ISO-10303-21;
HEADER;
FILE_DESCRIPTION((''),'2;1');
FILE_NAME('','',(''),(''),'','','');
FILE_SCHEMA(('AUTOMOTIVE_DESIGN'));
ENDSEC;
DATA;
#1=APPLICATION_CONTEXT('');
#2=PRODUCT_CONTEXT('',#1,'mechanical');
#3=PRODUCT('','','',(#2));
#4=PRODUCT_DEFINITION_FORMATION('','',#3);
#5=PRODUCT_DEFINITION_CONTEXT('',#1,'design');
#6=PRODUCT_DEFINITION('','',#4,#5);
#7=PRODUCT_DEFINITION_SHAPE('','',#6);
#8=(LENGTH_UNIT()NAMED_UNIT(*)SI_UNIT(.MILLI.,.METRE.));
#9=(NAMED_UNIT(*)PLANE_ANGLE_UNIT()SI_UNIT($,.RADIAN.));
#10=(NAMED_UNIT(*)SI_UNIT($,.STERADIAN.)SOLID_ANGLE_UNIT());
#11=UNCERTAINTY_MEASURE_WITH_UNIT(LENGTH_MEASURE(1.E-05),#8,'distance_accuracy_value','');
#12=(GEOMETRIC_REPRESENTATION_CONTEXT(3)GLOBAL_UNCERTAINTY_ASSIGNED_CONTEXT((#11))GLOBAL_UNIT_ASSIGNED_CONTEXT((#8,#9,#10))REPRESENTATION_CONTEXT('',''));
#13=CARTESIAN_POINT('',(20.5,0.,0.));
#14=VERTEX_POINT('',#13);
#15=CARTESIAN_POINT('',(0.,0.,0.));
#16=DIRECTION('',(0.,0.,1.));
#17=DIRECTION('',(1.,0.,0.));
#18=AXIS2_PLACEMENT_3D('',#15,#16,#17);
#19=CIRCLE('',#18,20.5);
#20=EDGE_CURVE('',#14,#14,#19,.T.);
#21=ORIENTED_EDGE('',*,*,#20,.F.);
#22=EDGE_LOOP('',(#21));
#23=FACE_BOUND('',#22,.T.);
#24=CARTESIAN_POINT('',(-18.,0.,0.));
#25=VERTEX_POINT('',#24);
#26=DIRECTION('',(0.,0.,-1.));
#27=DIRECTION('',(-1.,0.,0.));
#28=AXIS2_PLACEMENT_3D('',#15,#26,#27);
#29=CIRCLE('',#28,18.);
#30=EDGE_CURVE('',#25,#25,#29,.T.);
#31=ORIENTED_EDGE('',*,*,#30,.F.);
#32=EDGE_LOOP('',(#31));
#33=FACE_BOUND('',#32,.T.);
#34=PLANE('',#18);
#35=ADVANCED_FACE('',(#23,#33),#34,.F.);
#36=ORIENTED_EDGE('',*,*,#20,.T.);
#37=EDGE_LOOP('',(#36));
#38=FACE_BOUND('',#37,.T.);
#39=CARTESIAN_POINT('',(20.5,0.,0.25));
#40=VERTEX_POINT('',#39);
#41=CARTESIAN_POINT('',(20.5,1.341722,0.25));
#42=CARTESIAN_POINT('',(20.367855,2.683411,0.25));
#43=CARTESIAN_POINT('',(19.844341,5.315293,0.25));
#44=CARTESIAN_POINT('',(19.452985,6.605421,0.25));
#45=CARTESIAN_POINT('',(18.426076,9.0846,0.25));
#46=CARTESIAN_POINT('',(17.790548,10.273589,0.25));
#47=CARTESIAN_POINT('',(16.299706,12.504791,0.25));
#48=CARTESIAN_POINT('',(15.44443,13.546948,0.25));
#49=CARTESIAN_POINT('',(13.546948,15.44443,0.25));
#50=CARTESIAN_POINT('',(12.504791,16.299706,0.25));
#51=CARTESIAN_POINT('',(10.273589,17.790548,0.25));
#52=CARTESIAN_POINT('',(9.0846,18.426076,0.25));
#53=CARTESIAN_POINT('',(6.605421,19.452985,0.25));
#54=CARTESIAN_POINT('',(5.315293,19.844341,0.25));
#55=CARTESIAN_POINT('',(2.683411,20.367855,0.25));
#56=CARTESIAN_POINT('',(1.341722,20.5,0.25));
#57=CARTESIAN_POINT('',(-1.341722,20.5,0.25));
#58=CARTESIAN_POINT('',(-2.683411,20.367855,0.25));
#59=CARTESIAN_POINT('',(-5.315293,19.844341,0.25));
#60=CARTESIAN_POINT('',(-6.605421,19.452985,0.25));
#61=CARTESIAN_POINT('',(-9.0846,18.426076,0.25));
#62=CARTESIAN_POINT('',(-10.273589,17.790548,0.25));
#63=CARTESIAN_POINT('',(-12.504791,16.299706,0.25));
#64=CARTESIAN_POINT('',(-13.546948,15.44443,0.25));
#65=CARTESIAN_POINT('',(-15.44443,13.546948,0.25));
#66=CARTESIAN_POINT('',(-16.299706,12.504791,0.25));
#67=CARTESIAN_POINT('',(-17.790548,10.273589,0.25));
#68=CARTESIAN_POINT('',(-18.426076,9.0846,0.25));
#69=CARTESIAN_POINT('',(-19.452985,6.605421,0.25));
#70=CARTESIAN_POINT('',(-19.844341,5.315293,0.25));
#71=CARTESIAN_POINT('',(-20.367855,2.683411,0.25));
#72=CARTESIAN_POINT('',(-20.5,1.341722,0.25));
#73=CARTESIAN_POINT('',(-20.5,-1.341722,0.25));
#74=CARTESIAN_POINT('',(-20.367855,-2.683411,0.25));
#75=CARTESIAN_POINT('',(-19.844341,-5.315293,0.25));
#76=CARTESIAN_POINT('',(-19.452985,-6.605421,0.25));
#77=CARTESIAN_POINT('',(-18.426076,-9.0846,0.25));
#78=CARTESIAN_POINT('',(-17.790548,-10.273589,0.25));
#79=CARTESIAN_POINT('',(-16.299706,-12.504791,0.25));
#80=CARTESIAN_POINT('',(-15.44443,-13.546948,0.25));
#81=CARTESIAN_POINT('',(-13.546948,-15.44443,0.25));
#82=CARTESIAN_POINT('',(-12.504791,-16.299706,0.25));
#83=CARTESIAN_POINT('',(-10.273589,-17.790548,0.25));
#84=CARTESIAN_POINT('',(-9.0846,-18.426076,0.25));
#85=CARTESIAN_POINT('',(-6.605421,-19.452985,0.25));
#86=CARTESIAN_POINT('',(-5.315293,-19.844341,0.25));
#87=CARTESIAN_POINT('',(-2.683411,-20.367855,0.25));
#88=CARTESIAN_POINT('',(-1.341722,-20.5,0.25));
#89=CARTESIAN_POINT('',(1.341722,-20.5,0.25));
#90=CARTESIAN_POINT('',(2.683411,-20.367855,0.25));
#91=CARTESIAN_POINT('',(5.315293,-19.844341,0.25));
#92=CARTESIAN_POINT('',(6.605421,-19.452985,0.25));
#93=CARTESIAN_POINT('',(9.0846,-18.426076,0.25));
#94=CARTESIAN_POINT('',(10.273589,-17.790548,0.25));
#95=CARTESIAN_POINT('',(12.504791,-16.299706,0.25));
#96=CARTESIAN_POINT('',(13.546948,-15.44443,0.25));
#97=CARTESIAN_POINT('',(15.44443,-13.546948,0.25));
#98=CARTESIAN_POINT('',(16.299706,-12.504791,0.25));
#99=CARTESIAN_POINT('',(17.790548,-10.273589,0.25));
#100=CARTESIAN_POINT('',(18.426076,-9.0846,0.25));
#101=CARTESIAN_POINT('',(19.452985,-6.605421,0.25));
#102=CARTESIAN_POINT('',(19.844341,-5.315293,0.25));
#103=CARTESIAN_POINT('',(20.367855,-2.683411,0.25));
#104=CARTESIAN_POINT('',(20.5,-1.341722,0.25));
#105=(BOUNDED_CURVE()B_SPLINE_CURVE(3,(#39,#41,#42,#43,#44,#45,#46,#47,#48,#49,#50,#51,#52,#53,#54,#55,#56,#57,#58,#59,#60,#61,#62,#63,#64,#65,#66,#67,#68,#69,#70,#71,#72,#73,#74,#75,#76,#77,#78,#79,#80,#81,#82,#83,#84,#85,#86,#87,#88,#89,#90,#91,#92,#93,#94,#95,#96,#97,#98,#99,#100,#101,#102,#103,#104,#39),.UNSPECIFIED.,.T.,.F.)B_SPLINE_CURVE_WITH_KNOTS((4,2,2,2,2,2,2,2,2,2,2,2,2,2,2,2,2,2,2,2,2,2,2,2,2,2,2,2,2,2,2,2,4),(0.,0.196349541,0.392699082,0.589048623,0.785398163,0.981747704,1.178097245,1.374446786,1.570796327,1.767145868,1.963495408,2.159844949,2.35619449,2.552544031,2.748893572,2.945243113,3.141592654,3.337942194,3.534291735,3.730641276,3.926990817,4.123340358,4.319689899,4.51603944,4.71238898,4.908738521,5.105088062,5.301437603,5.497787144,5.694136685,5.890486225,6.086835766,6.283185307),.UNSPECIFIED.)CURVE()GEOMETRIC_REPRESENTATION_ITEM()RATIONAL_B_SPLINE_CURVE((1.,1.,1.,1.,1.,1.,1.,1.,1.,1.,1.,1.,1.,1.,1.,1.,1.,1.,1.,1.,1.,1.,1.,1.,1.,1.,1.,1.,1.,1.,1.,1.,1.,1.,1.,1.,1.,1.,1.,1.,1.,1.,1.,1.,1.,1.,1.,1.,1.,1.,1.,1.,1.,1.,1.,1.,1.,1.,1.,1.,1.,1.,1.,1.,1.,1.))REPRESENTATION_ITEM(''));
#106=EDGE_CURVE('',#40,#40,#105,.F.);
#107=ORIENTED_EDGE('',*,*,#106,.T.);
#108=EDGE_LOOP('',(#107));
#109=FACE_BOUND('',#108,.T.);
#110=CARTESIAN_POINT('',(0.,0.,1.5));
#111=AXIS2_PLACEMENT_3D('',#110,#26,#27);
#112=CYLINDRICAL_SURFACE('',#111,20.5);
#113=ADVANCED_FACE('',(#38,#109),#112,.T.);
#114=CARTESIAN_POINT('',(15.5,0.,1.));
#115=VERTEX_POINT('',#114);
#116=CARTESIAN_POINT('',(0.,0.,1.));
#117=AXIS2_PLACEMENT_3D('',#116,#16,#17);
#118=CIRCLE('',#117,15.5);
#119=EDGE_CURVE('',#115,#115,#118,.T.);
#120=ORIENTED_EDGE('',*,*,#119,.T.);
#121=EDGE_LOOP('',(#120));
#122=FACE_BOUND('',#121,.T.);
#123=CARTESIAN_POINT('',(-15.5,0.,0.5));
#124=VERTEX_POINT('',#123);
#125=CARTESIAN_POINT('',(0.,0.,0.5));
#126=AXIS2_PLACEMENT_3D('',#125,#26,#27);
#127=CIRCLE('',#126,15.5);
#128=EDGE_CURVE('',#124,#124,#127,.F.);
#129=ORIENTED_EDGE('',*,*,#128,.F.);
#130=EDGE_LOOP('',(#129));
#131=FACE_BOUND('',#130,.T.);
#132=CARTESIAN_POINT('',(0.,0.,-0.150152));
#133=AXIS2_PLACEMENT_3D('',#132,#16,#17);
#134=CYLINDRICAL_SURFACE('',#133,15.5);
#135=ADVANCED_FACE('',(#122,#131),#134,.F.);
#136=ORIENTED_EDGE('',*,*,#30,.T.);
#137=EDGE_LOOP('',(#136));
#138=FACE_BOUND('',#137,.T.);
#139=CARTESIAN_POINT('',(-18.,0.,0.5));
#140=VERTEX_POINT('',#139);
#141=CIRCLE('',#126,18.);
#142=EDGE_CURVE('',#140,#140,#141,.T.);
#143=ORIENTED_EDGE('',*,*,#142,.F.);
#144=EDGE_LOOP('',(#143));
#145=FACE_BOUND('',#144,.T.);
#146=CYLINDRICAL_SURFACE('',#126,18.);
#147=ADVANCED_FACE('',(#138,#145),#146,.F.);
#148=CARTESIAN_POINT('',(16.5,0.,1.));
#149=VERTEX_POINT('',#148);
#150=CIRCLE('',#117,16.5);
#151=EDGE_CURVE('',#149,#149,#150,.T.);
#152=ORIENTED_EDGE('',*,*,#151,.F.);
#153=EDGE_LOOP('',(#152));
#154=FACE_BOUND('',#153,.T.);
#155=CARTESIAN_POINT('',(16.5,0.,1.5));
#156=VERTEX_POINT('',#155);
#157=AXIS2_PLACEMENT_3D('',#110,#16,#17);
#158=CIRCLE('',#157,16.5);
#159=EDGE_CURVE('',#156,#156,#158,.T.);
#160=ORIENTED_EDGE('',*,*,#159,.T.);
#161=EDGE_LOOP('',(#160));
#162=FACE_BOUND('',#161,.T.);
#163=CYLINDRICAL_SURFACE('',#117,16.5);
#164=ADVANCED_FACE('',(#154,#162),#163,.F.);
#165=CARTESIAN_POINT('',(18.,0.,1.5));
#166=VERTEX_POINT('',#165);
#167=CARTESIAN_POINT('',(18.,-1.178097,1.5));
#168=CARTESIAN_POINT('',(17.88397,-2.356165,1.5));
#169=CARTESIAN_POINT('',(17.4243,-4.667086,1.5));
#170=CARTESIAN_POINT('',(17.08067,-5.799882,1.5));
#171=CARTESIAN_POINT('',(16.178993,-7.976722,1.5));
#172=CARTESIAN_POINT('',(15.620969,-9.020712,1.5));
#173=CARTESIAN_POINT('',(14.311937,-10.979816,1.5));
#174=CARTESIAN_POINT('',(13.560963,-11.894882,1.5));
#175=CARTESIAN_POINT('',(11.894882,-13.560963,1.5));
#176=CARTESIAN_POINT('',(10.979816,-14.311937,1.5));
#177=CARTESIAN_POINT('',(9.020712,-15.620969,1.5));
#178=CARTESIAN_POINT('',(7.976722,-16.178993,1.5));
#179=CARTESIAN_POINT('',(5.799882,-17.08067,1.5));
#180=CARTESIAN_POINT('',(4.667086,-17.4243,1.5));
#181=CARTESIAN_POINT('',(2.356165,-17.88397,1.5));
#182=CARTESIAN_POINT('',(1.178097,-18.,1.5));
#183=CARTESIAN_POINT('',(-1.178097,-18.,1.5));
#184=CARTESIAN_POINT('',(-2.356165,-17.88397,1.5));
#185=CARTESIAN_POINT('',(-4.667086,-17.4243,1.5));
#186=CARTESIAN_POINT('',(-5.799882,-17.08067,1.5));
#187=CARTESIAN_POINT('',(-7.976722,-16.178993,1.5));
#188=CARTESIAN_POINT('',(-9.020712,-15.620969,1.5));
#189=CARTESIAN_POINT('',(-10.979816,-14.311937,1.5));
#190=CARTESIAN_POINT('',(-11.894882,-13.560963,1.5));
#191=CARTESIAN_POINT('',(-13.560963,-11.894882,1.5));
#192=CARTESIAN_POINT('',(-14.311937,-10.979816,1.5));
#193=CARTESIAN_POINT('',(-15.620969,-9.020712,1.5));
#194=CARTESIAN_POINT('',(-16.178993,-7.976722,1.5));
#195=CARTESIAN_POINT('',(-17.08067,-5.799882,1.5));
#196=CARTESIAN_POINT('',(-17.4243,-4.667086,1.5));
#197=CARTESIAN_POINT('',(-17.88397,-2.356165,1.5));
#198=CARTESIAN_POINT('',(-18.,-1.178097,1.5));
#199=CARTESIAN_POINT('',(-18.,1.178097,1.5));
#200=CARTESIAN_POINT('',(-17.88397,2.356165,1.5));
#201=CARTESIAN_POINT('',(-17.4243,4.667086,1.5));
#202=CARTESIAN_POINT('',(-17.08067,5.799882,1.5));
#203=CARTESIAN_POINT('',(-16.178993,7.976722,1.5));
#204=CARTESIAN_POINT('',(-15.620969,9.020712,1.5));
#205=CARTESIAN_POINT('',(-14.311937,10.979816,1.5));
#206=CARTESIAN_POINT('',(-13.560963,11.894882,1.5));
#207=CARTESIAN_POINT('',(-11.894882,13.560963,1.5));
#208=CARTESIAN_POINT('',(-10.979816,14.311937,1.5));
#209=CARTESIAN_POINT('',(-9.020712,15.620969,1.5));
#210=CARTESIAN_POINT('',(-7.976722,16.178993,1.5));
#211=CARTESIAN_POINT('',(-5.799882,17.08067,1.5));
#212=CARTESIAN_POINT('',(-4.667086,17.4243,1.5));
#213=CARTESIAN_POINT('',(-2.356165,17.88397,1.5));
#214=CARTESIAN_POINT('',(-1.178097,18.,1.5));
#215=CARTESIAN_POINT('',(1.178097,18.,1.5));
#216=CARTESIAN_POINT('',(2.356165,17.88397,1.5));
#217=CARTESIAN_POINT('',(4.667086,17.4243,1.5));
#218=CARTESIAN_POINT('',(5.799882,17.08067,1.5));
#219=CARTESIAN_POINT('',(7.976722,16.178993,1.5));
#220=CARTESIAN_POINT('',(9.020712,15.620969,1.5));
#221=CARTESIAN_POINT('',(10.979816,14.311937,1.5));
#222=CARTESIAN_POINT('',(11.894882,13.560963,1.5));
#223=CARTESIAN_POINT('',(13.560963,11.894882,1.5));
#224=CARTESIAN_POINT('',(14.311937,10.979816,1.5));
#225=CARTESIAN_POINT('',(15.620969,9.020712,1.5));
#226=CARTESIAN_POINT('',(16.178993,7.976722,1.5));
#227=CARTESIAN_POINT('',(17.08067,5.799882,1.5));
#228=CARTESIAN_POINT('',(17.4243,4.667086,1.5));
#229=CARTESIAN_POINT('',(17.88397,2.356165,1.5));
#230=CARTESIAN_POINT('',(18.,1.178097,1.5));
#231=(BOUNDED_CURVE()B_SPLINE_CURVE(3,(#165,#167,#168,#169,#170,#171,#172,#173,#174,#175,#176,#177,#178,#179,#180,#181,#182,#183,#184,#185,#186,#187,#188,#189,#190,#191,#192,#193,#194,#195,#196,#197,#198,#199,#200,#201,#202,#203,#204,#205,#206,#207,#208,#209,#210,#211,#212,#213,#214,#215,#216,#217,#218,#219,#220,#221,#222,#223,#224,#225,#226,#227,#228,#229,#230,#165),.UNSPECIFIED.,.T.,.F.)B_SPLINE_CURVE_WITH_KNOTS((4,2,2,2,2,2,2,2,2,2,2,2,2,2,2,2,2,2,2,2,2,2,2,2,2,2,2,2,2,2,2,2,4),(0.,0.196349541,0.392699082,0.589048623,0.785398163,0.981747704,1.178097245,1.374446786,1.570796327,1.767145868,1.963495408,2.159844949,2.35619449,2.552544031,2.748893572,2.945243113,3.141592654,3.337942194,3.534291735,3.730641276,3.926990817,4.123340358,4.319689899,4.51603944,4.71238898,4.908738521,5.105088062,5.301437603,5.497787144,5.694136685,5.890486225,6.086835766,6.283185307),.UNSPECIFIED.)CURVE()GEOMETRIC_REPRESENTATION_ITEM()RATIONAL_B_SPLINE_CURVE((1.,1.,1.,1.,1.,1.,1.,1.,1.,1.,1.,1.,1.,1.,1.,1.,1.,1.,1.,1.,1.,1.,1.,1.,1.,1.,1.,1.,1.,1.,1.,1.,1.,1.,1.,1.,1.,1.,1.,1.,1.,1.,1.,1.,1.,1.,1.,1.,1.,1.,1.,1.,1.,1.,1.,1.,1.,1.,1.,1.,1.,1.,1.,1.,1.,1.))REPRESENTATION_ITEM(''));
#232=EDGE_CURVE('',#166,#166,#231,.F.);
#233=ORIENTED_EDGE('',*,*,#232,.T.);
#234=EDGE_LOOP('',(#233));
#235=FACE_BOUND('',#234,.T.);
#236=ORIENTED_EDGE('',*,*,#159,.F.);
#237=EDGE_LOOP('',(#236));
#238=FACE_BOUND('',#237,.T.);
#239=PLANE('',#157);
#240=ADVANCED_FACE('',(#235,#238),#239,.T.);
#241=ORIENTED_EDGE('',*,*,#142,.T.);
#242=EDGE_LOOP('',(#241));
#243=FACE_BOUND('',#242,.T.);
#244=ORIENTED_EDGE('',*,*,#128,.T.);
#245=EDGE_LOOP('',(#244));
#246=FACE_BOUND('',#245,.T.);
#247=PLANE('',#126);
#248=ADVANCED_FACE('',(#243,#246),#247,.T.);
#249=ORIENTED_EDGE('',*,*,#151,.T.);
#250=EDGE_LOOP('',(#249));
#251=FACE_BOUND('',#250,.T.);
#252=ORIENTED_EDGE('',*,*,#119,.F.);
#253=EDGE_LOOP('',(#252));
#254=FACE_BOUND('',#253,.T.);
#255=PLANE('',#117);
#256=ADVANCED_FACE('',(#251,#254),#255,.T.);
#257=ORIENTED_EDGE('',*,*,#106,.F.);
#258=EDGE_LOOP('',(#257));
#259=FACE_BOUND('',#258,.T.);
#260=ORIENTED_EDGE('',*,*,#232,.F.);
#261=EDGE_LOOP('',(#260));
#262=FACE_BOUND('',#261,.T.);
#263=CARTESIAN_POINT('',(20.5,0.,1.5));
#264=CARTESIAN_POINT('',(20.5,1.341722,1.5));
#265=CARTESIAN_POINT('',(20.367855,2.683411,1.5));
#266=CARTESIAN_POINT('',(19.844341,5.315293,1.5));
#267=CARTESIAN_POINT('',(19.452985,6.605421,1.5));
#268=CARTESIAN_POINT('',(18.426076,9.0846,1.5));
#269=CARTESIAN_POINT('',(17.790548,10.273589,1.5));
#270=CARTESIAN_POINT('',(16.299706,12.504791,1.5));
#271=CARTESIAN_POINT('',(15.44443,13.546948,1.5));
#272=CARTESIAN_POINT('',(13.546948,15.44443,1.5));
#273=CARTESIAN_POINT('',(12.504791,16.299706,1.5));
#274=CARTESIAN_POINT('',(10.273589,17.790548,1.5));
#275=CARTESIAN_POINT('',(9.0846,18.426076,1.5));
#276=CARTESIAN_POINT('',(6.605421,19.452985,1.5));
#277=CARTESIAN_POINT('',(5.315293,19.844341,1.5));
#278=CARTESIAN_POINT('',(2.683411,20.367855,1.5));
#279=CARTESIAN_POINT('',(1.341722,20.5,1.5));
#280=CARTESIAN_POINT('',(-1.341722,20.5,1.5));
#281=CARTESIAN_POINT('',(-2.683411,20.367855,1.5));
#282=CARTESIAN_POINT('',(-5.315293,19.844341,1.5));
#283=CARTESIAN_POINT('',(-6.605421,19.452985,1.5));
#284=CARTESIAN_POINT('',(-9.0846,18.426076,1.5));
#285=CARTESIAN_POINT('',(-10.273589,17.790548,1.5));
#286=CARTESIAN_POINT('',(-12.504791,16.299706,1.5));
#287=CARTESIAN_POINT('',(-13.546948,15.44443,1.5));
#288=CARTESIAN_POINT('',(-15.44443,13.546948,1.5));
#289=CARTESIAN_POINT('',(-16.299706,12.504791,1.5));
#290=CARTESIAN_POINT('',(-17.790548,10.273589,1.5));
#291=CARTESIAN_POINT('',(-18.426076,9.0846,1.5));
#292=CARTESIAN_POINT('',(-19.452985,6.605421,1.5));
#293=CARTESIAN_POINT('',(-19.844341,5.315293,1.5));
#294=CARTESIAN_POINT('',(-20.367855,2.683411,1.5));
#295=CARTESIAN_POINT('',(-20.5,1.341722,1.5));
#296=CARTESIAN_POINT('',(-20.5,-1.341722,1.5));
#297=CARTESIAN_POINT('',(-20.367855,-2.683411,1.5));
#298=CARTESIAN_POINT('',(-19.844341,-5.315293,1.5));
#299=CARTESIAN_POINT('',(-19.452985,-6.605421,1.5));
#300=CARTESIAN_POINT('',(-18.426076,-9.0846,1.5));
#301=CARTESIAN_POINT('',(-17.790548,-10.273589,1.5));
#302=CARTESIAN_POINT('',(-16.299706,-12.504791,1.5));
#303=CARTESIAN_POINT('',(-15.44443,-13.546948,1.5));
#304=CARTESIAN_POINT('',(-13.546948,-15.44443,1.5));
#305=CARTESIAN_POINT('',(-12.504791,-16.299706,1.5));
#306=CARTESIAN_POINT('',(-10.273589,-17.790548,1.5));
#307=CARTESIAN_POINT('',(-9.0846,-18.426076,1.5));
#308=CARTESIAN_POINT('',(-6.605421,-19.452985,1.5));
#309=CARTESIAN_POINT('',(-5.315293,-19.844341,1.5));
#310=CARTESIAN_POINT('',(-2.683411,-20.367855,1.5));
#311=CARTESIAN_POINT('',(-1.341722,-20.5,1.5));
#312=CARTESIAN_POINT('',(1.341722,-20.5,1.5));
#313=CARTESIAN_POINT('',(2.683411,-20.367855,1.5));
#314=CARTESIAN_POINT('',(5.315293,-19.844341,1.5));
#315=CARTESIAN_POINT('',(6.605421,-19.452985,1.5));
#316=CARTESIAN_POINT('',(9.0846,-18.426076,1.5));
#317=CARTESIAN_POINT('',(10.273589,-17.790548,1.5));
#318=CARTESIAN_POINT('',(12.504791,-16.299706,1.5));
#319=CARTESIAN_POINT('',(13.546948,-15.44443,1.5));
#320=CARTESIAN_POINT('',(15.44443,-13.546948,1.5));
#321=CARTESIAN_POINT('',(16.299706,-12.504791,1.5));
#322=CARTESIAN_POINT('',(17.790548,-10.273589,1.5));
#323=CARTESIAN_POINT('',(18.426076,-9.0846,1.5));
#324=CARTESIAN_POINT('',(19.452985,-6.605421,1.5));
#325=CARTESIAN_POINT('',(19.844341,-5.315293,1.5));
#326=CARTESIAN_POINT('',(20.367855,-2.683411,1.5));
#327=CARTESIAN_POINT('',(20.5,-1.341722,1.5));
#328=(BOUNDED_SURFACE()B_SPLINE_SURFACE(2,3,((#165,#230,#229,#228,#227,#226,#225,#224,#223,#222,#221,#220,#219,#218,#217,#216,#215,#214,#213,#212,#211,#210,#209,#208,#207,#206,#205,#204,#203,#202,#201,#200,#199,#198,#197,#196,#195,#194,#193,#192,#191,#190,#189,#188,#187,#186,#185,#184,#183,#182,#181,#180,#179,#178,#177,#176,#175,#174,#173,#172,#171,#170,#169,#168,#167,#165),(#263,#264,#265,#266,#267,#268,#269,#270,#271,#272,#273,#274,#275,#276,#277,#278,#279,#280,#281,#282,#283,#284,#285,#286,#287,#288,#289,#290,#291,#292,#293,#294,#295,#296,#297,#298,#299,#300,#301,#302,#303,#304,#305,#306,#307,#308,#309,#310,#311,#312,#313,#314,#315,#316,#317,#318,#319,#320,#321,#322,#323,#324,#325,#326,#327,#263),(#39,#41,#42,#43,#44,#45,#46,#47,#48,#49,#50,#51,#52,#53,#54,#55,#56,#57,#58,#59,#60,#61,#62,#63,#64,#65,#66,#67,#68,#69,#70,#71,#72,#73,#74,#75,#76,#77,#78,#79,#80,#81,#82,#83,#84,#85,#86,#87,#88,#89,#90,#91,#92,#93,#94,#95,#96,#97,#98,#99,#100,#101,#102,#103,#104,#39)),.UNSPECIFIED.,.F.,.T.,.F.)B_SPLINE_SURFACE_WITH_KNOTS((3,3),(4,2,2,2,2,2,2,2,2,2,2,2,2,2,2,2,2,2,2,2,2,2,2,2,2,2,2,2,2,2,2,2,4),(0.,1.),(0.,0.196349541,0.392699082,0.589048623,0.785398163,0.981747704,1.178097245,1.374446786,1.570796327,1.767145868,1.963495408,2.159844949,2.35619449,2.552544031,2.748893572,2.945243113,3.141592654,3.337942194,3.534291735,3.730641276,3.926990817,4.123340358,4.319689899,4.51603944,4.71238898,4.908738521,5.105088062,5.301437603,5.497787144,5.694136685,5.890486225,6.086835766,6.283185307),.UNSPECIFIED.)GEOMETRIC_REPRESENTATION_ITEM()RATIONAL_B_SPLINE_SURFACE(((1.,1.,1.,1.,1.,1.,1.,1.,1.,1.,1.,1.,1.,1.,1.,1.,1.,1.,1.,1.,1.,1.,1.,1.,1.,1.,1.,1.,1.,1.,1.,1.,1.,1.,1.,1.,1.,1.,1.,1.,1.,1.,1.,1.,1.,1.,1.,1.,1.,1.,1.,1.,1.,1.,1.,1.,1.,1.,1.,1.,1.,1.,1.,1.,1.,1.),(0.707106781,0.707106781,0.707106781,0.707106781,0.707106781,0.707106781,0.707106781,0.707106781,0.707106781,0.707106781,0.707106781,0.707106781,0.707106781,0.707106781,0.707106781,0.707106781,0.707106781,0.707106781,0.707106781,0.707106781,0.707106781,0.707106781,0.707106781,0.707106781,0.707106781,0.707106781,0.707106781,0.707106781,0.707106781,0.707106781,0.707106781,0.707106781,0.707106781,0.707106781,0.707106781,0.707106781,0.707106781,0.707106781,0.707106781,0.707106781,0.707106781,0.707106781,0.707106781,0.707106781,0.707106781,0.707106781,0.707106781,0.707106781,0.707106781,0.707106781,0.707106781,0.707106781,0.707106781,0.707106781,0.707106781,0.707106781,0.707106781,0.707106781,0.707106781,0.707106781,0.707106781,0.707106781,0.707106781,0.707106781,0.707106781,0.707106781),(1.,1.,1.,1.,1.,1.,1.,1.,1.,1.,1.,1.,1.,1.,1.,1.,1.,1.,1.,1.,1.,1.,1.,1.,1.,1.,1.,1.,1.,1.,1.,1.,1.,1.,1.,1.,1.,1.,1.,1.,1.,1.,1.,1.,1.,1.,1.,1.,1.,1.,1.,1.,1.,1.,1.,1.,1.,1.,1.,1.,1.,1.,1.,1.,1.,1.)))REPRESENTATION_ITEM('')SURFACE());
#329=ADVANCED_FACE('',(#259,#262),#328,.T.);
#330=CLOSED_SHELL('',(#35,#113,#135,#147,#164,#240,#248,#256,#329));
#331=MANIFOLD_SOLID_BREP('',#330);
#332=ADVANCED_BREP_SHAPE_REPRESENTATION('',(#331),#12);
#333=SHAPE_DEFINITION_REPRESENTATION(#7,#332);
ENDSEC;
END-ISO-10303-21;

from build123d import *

# Parameters (mm, degrees)
SKETCH1_R           = 20.5
BOSS_EXTRUDE1_DEPTH = 1.5
FILLET1_SIZE        = 1.25
FILLET1_SIZE_2      = 2.5
SKETCH2_R           = 16.5
CUT_EXTRUDE1_DEPTH  = 0.5
SKETCH3_R           = 15.5
CUT_EXTRUDE2_DEPTH  = 30.00861955
SKETCH4_R           = 18
CUT_EXTRUDE3_DEPTH  = 0.5


with BuildPart() as part:
    # Sketch1 → Boss-Extrude1 (new body)
    with BuildSketch(Plane.XY):
        Circle(SKETCH1_R)
    extrude(amount=BOSS_EXTRUDE1_DEPTH)

    # Fillet1
    # an asymmetric fillet: 2.5, 1.25 mm, written as the material it takes off along each edge
    with BuildSketch(Plane(origin=(0, 0, 1.5), x_dir=(1, 0, 0), z_dir=(0, -1, 0))) as fillet1_piece_1:
        with BuildLine():
            Bezier((20.5, -FILLET1_SIZE), (20.5, 0), (20.5 - FILLET1_SIZE_2, 0), weights=[1, 0.707106781, 1])
            Line((20.5 - FILLET1_SIZE_2, 0), (20.5, 0))
            Line((20.5, 0), (20.5, -FILLET1_SIZE))
        make_face()
    revolve(axis=Axis((0, 0, 1.5), (0, 0, 1)), mode=Mode.SUBTRACT)

    # Sketch2 → Cut-Extrude1 (cut)
    with BuildSketch(Plane.XY.offset(1.5)):
        Circle(SKETCH2_R)
    extrude(amount=-CUT_EXTRUDE1_DEPTH, mode=Mode.SUBTRACT)

    # Sketch3 → Cut-Extrude2 (cut, through all)
    with BuildSketch(Plane.XY.offset(1)):
        Circle(SKETCH3_R)
    extrude(amount=-CUT_EXTRUDE2_DEPTH, mode=Mode.SUBTRACT)

    # Sketch4 → Cut-Extrude3 (cut)
    with BuildSketch(Plane(origin=(0, 0, 0), x_dir=(-1, 0, 0), z_dir=(0, 0, -1))):
        Circle(SKETCH4_R)
    extrude(amount=-CUT_EXTRUDE3_DEPTH, mode=Mode.SUBTRACT)


solid = part.part
